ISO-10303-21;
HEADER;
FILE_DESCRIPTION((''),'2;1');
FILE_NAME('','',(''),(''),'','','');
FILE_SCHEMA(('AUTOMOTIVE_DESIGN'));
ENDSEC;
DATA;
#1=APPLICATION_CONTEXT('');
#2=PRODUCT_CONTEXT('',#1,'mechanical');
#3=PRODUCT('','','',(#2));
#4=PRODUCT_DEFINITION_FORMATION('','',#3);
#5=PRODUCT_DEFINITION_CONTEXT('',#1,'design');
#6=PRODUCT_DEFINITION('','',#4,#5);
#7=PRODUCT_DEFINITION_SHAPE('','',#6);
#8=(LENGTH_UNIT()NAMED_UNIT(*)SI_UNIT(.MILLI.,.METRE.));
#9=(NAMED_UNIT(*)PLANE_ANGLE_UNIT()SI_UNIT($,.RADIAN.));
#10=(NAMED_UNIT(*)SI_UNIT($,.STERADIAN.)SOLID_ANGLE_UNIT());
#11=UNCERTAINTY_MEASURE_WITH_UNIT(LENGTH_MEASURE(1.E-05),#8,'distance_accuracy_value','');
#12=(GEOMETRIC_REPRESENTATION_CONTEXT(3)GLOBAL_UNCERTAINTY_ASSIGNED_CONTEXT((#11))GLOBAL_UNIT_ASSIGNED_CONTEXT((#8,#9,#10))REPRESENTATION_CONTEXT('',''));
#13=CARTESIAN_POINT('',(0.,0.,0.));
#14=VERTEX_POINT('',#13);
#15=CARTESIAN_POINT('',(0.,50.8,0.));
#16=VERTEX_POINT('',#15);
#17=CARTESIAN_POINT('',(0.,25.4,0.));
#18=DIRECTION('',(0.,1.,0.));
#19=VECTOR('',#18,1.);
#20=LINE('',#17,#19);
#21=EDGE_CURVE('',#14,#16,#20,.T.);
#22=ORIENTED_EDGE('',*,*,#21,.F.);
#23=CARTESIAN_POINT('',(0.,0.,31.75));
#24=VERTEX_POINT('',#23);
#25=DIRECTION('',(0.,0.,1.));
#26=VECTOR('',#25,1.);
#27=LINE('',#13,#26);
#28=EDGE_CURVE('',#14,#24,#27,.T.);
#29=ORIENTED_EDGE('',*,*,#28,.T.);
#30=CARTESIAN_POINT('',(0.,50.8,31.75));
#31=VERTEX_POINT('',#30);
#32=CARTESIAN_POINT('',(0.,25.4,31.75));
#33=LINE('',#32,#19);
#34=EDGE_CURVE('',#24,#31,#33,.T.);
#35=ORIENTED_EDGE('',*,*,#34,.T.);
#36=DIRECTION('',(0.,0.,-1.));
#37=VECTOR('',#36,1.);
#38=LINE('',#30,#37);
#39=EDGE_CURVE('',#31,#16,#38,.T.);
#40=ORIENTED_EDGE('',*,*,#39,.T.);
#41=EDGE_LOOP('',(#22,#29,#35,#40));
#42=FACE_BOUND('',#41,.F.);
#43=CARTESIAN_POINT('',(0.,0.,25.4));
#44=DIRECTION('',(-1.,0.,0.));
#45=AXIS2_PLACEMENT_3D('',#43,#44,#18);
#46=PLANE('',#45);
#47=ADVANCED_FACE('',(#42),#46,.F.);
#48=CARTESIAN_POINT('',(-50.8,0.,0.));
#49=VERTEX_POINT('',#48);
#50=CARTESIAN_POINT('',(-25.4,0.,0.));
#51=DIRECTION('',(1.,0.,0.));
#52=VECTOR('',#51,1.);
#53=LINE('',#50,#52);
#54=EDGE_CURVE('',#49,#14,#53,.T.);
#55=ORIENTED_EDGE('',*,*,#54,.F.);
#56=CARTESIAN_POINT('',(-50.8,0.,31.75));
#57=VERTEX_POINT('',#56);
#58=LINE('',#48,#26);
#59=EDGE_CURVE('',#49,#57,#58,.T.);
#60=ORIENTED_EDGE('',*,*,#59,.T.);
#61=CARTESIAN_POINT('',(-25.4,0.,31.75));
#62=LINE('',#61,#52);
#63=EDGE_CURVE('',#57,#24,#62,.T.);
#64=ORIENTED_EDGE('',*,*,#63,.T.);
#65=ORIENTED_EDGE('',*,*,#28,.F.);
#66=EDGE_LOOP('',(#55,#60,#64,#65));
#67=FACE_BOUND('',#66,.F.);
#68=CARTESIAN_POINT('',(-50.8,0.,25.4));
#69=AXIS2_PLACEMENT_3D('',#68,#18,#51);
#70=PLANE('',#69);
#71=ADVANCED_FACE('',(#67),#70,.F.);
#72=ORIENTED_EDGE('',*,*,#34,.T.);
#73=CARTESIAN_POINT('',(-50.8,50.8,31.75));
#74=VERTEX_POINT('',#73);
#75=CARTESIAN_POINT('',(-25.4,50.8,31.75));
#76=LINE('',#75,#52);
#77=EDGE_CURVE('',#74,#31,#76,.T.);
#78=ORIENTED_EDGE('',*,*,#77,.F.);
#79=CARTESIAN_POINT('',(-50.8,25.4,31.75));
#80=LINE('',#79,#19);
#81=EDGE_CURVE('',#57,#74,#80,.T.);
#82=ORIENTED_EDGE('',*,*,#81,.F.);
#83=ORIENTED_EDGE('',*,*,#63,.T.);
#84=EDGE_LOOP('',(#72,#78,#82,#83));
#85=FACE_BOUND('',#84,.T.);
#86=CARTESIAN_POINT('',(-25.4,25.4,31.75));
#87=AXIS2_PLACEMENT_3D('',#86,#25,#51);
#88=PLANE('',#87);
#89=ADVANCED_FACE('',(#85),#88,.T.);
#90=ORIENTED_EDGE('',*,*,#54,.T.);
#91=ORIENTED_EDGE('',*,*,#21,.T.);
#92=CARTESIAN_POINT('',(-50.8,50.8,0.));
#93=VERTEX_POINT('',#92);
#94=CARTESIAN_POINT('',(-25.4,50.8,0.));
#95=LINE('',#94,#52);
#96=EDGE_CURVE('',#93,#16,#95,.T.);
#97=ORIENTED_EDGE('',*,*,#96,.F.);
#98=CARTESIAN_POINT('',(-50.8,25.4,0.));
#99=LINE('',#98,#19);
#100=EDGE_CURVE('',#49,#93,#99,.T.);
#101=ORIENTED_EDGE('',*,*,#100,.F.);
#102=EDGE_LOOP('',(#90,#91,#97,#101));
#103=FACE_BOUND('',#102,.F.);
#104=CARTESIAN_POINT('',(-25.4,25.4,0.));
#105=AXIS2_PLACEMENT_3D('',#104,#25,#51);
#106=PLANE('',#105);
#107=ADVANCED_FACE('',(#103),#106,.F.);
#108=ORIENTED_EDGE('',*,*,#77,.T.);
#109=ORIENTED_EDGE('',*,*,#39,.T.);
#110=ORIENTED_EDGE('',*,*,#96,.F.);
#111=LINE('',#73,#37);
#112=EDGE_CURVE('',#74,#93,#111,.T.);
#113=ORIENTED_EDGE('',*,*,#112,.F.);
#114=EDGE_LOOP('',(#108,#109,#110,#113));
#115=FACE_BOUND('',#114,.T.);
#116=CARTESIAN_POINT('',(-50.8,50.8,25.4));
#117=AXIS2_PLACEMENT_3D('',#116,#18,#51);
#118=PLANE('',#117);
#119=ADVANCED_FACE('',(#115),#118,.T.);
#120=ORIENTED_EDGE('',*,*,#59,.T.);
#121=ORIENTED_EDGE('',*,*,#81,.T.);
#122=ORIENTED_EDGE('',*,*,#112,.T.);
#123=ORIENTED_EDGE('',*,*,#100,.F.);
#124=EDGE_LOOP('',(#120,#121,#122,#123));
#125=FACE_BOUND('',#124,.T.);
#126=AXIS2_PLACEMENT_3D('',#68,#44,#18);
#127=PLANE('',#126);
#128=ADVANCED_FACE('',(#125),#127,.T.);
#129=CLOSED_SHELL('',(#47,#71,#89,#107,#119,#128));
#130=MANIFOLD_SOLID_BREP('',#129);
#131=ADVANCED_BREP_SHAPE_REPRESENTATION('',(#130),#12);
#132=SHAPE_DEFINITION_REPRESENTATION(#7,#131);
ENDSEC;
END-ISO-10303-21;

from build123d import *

# Parameters (mm, degrees)
F0_W     = 50.8
F0_H     = 50.8
F1_DEPTH = 25.4
F2_DEPTH = 6.35
F3_DEPTH = 20.828


# Not quite as in the source:
# - a feature names something its author has since deleted; it is built from what else it names


with BuildPart() as f1:
    # F0 (on Top) → F1 (new body)
    with BuildSketch(Plane.XY):
        with Locations((-25.4, 25.4)):
            Rectangle(F0_W, F0_H)
    extrude(amount=F1_DEPTH)

    # F2 (add): a face of the model
    f2_faces = [f1.faces().sort_by_distance(p)[0] for p in [
        (-25.4, 25.4, 25.4),
    ]]
    extrude(f2_faces, amount=F2_DEPTH)

    # F0 (on Top) → F3 (join)
    with BuildSketch(Plane.XY):
        with Locations((-25.4, 25.4)):
            Rectangle(F0_W, F0_H)
    extrude(amount=F3_DEPTH)


solid = f1.part
